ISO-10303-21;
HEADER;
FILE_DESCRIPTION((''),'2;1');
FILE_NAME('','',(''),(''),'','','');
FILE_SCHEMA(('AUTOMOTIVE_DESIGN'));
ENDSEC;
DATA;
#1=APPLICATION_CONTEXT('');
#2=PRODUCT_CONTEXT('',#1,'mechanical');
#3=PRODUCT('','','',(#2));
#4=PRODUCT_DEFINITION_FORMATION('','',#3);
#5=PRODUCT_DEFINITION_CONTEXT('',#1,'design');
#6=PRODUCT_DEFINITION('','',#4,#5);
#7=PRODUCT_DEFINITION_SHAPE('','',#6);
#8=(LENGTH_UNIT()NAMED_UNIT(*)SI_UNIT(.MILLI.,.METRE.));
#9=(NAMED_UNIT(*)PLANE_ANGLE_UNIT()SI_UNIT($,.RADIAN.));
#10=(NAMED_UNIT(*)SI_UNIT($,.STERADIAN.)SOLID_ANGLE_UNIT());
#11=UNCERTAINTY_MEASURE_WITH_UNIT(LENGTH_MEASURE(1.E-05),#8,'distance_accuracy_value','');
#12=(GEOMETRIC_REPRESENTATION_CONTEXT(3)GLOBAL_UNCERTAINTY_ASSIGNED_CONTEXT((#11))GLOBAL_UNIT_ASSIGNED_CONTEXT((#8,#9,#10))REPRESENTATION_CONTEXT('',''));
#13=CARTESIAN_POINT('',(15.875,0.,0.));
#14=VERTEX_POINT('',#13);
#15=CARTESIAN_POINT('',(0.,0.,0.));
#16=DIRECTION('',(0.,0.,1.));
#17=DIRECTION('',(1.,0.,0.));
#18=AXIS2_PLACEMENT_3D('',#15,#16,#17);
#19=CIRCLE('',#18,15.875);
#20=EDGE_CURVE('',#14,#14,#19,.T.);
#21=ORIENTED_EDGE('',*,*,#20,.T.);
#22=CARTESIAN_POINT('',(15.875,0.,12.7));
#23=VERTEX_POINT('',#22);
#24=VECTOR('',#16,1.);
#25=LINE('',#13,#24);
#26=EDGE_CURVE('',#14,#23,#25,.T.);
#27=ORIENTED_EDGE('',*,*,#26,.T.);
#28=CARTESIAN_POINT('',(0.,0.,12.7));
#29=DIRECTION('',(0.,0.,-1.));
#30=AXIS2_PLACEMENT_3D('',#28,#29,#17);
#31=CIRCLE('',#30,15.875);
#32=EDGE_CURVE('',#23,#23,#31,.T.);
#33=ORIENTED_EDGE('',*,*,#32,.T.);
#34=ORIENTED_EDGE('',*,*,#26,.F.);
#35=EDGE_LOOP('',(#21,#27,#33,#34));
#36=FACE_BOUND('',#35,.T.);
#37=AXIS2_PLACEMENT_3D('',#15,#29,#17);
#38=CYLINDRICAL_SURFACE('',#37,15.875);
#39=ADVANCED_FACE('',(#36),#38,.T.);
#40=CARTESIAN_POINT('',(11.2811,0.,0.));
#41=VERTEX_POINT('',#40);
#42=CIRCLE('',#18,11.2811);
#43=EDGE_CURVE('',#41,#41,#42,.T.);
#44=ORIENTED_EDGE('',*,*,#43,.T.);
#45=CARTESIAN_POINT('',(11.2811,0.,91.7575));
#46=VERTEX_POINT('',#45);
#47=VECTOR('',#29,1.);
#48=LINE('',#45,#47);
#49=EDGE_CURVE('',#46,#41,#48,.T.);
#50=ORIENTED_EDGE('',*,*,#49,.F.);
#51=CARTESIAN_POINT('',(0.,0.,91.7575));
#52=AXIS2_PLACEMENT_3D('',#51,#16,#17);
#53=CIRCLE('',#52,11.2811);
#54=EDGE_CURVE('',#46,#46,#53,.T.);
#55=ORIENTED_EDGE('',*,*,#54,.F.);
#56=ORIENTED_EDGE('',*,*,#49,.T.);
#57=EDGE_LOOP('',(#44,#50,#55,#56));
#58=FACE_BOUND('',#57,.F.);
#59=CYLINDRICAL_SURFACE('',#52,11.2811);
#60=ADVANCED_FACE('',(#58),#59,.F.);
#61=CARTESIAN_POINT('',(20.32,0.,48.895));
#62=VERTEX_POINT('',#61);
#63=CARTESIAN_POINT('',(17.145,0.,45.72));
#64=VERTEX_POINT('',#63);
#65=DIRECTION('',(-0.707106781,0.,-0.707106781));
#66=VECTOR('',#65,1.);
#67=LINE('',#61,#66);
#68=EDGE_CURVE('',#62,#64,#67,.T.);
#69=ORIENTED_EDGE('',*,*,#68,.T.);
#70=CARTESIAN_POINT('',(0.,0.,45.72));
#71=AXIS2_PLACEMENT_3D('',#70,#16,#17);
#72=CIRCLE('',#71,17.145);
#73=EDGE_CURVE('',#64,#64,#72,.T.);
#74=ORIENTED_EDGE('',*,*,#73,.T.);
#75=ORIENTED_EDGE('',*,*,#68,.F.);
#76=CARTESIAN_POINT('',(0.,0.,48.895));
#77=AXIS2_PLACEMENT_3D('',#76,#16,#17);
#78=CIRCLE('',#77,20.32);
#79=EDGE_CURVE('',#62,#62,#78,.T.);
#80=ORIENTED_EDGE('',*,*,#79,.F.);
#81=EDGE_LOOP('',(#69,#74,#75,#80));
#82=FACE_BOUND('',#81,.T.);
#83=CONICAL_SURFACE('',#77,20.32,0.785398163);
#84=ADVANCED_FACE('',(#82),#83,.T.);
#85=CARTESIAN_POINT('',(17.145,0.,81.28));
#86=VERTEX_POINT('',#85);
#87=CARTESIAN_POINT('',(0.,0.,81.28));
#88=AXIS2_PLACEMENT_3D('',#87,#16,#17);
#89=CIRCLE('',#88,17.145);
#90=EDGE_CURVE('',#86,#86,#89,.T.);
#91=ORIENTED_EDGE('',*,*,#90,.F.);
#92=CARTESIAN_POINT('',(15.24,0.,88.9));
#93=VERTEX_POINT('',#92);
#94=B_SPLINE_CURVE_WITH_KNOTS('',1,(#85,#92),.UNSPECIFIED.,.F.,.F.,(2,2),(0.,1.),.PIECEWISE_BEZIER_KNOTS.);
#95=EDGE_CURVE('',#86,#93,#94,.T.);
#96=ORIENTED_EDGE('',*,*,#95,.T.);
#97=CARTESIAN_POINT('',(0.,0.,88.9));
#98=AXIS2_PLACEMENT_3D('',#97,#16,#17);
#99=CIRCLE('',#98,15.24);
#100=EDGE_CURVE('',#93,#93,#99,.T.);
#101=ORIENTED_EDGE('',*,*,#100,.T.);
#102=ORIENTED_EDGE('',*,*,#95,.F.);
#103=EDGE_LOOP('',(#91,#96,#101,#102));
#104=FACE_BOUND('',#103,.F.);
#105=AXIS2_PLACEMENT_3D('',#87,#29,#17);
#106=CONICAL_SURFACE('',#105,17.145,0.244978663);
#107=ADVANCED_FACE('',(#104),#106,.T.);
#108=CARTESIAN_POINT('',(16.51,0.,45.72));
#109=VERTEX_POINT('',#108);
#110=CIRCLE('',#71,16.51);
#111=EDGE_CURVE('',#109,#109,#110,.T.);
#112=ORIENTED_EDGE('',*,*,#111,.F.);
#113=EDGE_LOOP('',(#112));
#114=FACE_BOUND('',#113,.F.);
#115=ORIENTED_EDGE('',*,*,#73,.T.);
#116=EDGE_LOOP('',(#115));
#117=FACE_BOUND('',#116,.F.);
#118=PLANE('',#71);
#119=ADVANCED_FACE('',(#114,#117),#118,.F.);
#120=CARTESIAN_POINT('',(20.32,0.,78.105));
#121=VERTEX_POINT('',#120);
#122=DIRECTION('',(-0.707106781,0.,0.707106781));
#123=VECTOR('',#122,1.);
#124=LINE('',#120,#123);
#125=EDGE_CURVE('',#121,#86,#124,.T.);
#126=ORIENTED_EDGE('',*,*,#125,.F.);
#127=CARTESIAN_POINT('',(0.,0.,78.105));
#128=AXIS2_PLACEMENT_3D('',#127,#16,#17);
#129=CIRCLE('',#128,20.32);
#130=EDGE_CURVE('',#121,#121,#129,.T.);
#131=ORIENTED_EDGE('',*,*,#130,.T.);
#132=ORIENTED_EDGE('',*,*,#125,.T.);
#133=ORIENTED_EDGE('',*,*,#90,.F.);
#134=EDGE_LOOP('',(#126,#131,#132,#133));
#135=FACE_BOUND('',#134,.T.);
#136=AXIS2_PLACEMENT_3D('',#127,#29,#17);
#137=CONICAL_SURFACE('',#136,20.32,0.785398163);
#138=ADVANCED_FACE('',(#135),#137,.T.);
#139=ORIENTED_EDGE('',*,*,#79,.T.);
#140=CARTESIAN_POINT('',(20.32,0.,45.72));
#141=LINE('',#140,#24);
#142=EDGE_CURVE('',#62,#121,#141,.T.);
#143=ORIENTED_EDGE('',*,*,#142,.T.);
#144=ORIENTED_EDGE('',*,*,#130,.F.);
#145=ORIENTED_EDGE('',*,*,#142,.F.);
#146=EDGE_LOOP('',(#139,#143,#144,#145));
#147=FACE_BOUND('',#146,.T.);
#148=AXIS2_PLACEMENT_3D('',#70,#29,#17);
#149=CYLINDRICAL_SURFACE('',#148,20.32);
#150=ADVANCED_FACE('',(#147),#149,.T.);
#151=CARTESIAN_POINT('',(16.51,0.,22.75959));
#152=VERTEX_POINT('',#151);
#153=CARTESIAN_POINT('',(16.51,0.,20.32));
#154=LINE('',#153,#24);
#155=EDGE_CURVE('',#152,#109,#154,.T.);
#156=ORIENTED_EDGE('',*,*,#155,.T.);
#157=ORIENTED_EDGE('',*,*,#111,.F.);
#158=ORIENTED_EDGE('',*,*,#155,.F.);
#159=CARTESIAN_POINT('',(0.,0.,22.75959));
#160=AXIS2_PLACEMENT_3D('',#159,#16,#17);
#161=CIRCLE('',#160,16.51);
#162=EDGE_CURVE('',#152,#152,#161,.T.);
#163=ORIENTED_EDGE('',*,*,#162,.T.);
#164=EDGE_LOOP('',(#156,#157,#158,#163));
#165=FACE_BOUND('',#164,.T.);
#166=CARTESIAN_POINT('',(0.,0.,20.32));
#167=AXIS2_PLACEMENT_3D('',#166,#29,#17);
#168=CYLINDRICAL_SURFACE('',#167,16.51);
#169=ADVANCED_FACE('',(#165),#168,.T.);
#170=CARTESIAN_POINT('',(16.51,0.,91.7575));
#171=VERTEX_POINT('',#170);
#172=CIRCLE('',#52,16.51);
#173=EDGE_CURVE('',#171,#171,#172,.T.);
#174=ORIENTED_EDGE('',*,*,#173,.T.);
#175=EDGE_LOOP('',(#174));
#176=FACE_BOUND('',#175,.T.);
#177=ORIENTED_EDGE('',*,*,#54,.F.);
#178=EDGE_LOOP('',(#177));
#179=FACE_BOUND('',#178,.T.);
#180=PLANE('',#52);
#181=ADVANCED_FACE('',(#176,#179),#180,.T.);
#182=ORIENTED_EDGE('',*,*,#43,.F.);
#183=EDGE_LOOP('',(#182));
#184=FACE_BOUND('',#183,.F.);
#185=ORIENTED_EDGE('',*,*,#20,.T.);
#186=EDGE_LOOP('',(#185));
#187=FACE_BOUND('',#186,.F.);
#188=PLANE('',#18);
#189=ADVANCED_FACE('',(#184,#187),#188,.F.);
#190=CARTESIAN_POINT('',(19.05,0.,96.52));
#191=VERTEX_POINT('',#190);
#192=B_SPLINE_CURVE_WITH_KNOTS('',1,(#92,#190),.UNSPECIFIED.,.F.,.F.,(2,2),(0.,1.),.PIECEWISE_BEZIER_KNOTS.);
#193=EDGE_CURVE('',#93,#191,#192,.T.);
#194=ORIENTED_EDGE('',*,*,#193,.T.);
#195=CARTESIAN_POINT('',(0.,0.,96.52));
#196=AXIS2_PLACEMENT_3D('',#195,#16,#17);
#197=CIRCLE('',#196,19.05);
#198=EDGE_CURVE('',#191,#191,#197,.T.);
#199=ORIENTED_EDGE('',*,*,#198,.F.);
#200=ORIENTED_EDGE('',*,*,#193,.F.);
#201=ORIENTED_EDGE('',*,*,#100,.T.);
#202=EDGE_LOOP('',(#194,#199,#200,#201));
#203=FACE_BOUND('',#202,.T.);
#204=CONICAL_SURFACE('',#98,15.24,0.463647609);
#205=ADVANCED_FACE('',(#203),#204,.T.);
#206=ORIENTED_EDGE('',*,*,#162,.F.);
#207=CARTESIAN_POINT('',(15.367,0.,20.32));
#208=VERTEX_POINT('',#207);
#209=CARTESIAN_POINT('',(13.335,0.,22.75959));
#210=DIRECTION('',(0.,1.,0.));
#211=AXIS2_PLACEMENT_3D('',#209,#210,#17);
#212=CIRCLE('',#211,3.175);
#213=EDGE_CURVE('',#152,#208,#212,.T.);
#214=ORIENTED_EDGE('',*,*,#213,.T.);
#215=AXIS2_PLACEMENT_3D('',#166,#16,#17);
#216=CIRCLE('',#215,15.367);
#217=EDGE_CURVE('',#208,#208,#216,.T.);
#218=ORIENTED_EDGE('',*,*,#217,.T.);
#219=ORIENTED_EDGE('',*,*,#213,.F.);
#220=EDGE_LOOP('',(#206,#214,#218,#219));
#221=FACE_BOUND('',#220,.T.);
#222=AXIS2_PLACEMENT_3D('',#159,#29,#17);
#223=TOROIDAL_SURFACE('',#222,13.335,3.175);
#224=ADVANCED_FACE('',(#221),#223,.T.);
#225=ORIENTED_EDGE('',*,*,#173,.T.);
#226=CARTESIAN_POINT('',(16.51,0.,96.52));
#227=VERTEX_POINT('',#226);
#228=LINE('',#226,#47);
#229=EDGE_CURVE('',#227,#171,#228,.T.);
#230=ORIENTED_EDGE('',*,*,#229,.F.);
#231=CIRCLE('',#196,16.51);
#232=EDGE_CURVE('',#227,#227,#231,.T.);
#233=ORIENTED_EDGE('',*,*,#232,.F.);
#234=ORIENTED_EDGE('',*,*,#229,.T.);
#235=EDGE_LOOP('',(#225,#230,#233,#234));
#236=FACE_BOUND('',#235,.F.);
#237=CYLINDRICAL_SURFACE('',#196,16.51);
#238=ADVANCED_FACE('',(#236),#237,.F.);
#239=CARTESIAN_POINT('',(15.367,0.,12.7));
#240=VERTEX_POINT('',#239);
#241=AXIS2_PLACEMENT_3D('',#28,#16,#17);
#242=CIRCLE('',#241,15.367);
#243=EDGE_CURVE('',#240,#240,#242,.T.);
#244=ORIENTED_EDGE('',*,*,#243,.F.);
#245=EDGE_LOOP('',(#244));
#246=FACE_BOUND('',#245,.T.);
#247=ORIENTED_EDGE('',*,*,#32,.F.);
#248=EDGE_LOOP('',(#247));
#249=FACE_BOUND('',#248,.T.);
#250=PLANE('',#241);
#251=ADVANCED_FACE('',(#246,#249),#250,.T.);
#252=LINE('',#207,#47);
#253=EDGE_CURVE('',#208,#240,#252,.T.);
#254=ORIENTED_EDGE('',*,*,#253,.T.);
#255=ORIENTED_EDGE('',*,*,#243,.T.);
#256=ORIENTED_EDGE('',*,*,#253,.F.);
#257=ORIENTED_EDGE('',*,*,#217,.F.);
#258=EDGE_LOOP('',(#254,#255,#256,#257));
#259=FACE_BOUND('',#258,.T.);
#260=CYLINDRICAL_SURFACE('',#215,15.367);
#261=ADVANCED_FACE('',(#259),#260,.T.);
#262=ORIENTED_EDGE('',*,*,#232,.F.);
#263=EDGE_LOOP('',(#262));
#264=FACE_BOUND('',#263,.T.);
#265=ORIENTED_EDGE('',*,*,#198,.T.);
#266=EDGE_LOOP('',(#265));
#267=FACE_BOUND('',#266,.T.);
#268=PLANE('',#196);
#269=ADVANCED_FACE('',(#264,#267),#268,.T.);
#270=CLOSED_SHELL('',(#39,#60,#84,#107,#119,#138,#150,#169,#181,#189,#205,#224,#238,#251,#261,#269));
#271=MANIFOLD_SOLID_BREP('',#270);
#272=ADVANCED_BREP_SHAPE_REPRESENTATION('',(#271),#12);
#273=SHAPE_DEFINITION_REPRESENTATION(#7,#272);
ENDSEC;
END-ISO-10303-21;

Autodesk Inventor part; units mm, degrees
ref_plane "YZ Plane" through (0, 0, 0) normal (1, 0, 0) x (0, 1, 0)
ref_plane "XZ Plane" through (0, 0, 0) normal (0, 1, 0) x (-1, 0, 0)
sketch "Sketch1" plane through (0, 0, 0) normal (0, 0, 1) x (1, 0, 0)
  circle A0 centre (0, 0) radius 15.875
  dimension "d0" = 31.75
extrude "Extrusion1" add sketch "Sketch1" along normal blind 20.32
sketch "Sketch2" plane through (0, 0, 20.32) normal (0, 0, 1) x (1, 0, 0)
  circle A0 centre (0, 0) radius 15.367
  circle A1 centre (0, 0) radius 16.7085
  dimension "d5" = 30.734
extrude "Extrusion2" cut sketch "Sketch2" against normal blind 7.62
sketch "Sketch3" plane through (0, 0, 20.32) normal (0, 0, 1) x (1, 0, 0)
  circle A0 centre (0, 0) radius 16.51
  dimension "d6" = 33.02
extrude "Extrusion3" add sketch "Sketch3" along normal blind 25.4
fillet "Fillet1" radius 3.175 1 edges at (-16.51, 0, 20.32)
sketch "Sketch4" plane through (0, 0, 45.72) normal (0, 0, 1) x (1, 0, 0)
  circle A0 centre (0, 0) radius 20.32
  dimension "d10" = 40.64
extrude "Extrusion4" add sketch "Sketch4" along normal blind 35.56
chamfer "Chamfer1" distance 3.175 angle 45 2 edges at (-20.32, 0, 45.72) (-20.32, 0, 81.28)
sketch "Sketch5" plane through (0, 0, 0) normal (0, 1, 0) x (-1, 0, 0)
  point P0 (0, 0)
ref_plane "Work Plane1" through (0, 0, 88.9) normal (0, 0, 1) x (1, 0, 0)
sketch "Sketch6" plane through (0, 0, 88.9) normal (0, 0, 1) x (1, 0, 0)
  circle A0 centre (0, 0) radius 15.24
  dimension "d17" = 30.48
loft "Loft1" add profiles "Sketch6" section 1 edges at (-17.145, 0, 81.28)
ref_plane "Work Plane2" through (0, 0, 96.52) normal (0, 0, 1) x (1, 0, 0)
sketch "Sketch7" plane through (0, 0, 96.52) normal (0, 0, 1) x (1, 0, 0)
  circle A0 centre (0, 0) radius 19.05
  dimension "d23" = 38.1
loft "Loft2" add profiles "Sketch7" section 1 edges at (-15.24, 0, 88.9)
sketch "Sketch8" plane through (0, 0, 96.52) normal (0, 0, 1) x (1, 0, 0)
  circle A0 centre (0, 0) radius 16.51
extrude "Extrusion5" cut sketch "Sketch8" against normal blind 4.7625
sketch "Sketch9" plane through (0, 0, 91.7575) normal (0, 0, 1) x (1, 0, 0)
  circle A0 centre (0, 0) radius 11.2811
extrude "Extrusion6" cut sketch "Sketch9" against normal blind 120.65
properties part number "okular" material "Iron, Cast"
